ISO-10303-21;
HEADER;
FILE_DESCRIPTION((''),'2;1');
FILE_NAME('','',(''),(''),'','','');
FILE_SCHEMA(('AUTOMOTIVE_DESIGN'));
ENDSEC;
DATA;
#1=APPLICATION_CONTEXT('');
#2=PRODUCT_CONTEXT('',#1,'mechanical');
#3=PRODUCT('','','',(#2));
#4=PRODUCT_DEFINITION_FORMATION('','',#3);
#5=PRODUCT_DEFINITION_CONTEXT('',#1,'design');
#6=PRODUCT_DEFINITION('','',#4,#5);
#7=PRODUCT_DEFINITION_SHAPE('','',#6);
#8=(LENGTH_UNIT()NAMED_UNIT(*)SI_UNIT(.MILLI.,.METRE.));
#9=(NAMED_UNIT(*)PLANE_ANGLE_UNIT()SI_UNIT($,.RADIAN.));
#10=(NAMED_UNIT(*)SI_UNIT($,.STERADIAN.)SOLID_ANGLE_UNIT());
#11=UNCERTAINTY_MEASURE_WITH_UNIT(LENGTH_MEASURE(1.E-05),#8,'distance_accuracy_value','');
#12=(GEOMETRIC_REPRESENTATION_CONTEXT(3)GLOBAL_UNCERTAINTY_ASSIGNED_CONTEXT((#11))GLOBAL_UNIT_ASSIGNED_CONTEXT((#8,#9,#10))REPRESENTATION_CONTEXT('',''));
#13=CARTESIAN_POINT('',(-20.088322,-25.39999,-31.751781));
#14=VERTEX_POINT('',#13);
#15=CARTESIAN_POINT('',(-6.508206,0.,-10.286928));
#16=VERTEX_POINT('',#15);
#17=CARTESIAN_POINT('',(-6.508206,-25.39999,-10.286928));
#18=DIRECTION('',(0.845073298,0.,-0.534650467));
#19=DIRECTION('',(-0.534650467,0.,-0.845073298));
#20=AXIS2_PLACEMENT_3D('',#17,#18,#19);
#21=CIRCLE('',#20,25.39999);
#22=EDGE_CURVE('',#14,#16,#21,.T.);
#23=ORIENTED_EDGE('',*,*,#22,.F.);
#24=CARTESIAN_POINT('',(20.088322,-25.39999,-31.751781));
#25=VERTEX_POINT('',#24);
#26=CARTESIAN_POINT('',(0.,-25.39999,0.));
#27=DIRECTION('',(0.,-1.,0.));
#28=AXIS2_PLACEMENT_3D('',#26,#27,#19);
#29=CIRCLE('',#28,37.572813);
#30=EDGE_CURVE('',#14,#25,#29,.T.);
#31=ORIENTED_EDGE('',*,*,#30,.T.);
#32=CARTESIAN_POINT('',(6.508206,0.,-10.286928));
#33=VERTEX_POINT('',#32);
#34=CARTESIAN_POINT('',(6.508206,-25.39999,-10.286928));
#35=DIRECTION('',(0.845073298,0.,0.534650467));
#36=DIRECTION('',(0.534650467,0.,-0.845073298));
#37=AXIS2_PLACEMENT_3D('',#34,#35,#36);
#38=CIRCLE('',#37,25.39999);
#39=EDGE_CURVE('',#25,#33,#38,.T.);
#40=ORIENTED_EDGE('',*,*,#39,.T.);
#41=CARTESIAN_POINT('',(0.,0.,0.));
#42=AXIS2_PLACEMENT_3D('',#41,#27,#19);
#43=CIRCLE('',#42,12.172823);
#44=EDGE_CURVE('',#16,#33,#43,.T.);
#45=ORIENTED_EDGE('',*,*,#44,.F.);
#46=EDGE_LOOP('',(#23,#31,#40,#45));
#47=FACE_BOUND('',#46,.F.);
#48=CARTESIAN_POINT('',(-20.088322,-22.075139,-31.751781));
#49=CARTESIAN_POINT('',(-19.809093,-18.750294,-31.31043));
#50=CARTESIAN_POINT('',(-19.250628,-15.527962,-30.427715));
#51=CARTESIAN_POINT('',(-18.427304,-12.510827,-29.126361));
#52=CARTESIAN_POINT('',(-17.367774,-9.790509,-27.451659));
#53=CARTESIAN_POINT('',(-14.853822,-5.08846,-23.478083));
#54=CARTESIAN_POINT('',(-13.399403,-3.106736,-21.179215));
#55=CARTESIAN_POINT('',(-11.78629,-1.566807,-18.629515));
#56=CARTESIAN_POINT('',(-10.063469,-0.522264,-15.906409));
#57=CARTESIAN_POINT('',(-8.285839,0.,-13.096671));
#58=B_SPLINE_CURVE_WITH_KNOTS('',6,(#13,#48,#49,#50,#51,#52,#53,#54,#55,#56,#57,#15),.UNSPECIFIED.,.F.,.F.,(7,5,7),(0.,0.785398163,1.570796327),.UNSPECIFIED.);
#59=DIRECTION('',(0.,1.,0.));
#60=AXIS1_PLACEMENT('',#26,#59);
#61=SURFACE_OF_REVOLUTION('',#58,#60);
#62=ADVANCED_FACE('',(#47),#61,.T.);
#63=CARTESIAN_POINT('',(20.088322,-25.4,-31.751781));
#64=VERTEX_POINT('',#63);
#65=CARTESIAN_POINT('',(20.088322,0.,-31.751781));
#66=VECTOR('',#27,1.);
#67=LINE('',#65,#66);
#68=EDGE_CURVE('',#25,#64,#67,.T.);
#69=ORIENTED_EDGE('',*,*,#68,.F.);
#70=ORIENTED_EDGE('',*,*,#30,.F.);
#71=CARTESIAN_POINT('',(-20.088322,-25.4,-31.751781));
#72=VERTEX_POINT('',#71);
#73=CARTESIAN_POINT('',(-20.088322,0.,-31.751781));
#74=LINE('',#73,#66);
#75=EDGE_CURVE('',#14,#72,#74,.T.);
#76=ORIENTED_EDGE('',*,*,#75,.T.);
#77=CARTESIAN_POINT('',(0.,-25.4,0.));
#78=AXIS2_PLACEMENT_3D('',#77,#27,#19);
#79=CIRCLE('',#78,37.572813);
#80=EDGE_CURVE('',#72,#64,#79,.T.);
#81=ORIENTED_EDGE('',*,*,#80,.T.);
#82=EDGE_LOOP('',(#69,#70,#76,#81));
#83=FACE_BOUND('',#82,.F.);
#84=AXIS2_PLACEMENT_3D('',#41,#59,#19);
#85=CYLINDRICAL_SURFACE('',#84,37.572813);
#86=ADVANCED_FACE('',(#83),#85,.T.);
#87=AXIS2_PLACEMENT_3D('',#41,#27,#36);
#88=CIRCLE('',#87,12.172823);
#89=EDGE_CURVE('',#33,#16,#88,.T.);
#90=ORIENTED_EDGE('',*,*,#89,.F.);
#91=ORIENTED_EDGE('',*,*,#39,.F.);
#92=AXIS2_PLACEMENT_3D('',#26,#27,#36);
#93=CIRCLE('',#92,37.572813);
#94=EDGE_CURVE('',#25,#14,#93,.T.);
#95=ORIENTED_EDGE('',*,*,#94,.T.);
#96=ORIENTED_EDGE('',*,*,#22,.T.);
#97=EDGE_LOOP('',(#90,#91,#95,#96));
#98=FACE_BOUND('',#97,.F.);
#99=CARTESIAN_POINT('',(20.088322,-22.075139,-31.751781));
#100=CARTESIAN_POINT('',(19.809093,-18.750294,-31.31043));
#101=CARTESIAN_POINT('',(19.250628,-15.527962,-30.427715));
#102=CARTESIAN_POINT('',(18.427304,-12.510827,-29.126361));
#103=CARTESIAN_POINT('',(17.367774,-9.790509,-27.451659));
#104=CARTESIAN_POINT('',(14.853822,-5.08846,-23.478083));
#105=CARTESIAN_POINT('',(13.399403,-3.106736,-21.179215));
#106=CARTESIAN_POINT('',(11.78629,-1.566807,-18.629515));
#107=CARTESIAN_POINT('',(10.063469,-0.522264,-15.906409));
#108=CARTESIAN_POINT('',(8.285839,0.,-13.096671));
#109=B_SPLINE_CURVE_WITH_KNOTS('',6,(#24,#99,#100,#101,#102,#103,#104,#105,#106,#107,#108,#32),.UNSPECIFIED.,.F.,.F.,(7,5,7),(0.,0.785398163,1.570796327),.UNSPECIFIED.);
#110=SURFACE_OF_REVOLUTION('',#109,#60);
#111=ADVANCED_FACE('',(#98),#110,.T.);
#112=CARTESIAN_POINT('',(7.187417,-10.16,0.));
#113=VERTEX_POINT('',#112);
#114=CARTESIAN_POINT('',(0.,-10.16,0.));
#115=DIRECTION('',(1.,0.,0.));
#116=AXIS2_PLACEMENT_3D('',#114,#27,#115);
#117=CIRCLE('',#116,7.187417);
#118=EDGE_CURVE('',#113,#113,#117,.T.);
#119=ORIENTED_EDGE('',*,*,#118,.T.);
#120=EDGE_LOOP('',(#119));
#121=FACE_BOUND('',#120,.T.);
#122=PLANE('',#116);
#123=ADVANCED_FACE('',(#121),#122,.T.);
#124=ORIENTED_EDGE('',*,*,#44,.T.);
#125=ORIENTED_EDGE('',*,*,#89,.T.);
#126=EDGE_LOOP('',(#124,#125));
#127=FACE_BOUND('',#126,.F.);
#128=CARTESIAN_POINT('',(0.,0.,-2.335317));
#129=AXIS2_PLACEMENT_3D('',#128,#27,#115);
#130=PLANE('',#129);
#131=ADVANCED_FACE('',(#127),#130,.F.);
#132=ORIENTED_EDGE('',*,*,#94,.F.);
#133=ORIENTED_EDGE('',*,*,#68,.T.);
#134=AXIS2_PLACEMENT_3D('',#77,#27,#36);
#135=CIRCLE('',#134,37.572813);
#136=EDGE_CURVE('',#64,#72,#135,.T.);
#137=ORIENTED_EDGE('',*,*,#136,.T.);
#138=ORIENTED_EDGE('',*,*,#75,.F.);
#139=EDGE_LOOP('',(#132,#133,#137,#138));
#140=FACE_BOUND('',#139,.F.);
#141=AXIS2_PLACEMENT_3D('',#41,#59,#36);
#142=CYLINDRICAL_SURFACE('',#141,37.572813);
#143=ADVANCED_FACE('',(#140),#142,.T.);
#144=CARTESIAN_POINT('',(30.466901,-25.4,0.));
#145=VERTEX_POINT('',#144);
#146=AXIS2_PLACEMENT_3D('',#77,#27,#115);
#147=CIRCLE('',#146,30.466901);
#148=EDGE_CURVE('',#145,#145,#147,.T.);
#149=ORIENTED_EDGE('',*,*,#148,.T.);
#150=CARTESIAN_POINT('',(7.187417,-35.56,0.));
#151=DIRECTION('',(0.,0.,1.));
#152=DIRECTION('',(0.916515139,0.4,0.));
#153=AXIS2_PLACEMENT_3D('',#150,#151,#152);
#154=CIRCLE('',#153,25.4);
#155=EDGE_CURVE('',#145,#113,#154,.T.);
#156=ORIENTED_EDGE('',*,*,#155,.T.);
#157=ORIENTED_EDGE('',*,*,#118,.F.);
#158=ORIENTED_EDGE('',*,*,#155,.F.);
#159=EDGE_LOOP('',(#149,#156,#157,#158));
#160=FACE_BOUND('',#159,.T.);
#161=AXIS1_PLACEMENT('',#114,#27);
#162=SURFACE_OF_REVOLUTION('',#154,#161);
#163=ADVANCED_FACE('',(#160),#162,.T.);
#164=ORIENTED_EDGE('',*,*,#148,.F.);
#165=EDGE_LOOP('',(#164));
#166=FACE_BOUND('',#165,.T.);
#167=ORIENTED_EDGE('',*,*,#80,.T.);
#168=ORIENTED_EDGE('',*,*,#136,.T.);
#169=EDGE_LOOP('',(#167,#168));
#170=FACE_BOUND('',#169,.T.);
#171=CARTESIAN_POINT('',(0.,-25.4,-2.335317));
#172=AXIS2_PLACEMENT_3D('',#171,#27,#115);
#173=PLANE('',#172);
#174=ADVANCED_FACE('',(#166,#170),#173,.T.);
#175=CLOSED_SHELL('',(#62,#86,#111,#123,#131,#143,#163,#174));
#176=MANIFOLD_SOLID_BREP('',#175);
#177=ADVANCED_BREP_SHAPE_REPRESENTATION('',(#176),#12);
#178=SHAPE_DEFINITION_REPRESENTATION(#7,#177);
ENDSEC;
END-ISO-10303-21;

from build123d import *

# Parameters (mm, degrees)
F1_DEPTH = 25.4
F2_R     = 25.39999
F3_R     = 30.4669012051
F4_DEPTH = 15.24


# Not quite as in the source:
# - a fillet or chamfer that OpenCascade refuses, or shapes differently, is made with other operations: its cross-section is extruded or revolved along the edge and cut away or added
# - a fillet or chamfer is up to 0.001 mm smaller than in the source, because OpenCascade refuses the exact size


with BuildPart() as f1:
    # F0 (on Front) → F1 (new body)
    with BuildSketch(Plane.XZ):
        with BuildLine():
            ThreePointArc((20.0883221204, -31.7517811512), (32.9126956238, -18.1237622657), (37.5728132017, 0))
            ThreePointArc((37.5728132017, 0), (-18.1237622657, 32.9126956238), (-20.0883221204, -31.7517811512))
            ThreePointArc((-20.0883221204, -31.7517811512), (0, -37.5728132017), (20.0883221204, -31.7517811512))
        make_face()
    extrude(amount=F1_DEPTH)

    # F2 (radius 25.4 in the source; OpenCascade refuses exactly that, so slightly less here)
    f2_edges = [f1.edges().sort_by_distance(p)[0] for p in [
        (20.088322, 0, 31.751781),
    ]]
    fillet(f2_edges, radius=F2_R)

    # F3 (on face) → F4 (cut)
    with BuildSketch(Plane.XZ.offset(25.4)):
        Circle(F3_R)
    extrude(amount=-F4_DEPTH, mode=Mode.SUBTRACT)

    # F5: fillet of radius 25.4 on 1 edges, made by hand

    # F5_s1 → F5_t2 (revolve)
    with BuildSketch(Plane.XY):
        with BuildLine():
            ThreePointArc((30.4669012051, -25.4), (21.0995696353, -14.308835326), (7.1874166747, -10.16))
            Line((7.1874166747, -10.16), (30.4669012051, -10.16))
            Line((30.4669012051, -10.16), (30.4669012051, -25.4))
        make_face()
    revolve(axis=Axis((0, -10.16, 0), (0, -1, 0)))


solid = f1.part
